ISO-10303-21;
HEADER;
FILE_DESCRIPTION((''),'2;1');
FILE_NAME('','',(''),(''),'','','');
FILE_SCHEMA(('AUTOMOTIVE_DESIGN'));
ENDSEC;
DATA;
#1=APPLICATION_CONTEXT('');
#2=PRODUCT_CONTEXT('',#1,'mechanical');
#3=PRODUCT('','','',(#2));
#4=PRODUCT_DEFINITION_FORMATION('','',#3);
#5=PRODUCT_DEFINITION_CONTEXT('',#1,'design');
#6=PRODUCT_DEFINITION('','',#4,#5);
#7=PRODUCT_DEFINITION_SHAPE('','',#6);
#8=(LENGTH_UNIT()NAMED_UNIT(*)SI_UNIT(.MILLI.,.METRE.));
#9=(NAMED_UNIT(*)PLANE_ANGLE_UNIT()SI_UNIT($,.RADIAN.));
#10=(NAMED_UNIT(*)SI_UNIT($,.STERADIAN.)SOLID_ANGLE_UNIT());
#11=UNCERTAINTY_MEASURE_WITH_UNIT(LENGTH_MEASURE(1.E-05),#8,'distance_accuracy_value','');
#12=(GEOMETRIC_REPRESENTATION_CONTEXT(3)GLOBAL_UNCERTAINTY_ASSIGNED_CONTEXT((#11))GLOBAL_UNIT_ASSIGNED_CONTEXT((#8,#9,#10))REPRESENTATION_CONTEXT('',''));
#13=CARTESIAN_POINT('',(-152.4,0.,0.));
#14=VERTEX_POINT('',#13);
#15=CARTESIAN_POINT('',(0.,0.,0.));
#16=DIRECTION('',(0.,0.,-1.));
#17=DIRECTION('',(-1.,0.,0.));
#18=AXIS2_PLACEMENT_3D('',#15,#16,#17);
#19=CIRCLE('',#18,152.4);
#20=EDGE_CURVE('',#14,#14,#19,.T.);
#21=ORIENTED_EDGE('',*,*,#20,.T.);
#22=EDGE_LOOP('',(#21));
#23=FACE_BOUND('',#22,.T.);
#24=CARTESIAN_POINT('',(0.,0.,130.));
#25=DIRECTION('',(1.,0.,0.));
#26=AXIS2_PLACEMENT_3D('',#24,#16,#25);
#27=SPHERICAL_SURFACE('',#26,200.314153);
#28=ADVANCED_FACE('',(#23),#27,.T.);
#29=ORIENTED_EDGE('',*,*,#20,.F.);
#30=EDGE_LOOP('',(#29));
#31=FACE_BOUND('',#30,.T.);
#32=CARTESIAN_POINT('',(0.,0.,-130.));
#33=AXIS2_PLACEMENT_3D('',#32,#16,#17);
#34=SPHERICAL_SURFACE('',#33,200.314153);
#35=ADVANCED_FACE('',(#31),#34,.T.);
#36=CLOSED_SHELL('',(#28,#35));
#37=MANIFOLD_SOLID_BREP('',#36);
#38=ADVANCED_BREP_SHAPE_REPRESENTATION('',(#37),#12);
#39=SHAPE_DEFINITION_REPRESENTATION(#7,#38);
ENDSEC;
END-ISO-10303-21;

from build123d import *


with BuildPart() as part:
    # Sketch1 → Revolve3 (revolve)
    with BuildSketch(Plane(origin=(0, 0, 0), x_dir=(1, 0, 0), z_dir=(0, 1, 0))):
        with BuildLine():
            Line((0, -70.314153269), (0, 70.314153269))
            ThreePointArc((0, 70.314153269), (-83.919366284, 51.888152342), (-152.4, 0))
            ThreePointArc((-152.4, 0), (-83.919366284, -51.888152342), (0, -70.314153269))
        make_face()
    revolve(axis=Axis((0, 0, -90.803316959), (0, 0, 1)))


solid = part.part
